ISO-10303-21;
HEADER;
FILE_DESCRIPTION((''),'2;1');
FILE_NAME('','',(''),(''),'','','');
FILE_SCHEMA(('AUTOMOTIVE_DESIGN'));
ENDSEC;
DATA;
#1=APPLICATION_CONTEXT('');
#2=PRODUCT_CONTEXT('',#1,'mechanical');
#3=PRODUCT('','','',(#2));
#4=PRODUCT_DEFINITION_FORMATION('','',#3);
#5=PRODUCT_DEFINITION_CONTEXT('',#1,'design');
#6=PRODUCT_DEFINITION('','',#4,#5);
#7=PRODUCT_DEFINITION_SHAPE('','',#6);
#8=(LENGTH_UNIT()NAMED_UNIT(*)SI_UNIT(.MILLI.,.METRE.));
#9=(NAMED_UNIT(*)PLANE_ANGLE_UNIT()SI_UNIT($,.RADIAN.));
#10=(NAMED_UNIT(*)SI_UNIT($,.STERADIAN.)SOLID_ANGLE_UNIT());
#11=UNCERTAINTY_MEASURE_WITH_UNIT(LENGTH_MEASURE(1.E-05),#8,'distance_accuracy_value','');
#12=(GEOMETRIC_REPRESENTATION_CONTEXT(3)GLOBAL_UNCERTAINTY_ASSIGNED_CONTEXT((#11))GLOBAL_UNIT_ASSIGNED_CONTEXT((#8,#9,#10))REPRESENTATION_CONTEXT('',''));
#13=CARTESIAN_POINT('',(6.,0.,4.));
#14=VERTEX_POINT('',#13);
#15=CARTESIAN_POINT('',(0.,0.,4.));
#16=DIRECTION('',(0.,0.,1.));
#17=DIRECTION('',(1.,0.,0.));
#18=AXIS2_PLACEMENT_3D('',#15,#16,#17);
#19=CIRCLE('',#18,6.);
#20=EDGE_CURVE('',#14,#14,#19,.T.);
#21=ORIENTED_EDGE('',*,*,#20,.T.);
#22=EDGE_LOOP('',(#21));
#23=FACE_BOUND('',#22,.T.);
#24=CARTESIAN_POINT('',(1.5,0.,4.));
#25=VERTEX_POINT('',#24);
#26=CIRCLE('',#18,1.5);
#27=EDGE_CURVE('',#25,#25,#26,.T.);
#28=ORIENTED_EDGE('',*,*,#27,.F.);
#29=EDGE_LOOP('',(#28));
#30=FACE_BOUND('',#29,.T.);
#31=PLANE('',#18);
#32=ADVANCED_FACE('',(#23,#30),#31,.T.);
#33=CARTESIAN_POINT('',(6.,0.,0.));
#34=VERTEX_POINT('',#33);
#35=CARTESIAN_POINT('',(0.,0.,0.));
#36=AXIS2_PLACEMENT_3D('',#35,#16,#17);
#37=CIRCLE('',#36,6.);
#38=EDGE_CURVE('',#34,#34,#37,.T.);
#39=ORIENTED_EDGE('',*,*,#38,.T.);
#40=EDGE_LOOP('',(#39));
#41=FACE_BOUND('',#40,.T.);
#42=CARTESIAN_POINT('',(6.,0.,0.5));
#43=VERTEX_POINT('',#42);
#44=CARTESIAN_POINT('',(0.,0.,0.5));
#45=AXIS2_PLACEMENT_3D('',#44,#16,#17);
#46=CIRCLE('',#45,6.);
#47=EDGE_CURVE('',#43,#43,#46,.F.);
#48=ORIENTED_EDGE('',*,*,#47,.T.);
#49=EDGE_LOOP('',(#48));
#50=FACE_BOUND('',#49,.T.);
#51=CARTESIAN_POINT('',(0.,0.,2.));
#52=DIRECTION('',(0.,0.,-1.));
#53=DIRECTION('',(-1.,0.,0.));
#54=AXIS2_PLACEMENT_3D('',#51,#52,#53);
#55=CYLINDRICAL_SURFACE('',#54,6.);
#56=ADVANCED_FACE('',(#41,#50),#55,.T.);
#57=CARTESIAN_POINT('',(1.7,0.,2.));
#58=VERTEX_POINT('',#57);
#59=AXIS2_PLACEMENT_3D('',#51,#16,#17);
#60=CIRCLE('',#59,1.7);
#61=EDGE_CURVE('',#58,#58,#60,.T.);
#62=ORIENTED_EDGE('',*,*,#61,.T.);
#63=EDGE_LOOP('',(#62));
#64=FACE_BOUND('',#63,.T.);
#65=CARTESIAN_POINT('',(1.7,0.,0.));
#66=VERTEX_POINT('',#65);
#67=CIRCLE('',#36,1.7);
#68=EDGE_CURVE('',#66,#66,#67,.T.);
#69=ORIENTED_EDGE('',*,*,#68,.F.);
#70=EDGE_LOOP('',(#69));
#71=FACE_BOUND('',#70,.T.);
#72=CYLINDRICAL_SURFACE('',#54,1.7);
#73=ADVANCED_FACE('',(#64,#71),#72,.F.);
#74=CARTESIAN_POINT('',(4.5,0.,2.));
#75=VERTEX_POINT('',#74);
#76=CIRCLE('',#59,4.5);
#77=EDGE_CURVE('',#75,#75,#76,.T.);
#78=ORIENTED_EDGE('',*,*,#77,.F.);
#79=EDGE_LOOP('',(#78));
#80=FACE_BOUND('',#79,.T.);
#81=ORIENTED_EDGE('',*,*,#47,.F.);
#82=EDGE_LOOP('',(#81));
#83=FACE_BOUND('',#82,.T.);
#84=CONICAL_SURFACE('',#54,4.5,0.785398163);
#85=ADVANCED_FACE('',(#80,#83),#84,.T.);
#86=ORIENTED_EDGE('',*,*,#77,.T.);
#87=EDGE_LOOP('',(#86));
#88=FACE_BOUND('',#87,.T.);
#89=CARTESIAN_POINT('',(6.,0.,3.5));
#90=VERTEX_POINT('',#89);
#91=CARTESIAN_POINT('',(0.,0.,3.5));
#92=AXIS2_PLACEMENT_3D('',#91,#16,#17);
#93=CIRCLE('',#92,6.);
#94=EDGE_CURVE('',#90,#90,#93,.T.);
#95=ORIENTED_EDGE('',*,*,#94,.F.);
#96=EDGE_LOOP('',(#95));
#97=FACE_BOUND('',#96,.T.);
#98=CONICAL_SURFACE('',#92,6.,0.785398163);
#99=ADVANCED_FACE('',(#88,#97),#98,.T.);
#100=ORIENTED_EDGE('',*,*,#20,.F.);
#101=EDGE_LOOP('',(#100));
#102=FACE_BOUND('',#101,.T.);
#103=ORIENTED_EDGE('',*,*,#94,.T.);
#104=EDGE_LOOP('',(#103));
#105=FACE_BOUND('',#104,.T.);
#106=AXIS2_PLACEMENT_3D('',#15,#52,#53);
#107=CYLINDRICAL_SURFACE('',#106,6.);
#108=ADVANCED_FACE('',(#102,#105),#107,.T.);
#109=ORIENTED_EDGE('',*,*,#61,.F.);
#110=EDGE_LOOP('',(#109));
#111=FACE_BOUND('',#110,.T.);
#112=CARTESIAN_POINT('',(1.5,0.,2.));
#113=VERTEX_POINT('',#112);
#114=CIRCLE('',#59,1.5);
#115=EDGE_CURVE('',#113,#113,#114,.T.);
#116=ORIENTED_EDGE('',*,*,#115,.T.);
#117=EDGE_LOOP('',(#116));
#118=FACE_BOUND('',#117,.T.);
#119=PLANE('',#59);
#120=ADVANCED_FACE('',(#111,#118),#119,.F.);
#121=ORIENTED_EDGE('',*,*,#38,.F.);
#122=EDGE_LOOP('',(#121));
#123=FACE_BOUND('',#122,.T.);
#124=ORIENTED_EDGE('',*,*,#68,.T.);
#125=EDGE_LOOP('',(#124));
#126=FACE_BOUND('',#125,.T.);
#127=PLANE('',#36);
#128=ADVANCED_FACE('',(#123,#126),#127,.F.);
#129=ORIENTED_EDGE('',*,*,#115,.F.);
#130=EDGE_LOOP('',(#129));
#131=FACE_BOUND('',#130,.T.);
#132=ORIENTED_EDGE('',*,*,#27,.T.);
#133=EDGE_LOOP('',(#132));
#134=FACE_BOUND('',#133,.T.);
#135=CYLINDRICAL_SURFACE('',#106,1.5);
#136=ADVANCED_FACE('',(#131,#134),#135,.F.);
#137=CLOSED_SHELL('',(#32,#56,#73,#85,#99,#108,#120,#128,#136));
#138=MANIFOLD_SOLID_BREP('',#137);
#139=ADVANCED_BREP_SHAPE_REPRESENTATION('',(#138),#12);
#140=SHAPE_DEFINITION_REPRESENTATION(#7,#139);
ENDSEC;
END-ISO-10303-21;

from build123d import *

# Parameters (mm, degrees)
SKETCH1_R           = 6
SKETCH1_R_2         = 1.7
BOSS_EXTRUDE1_DEPTH = 2
CHAMFER1_SIZE       = 1.5
SKETCH2_R           = 6
SKETCH2_R_2         = 1.5
BOSS_EXTRUDE2_DEPTH = 2
CHAMFER2_SIZE       = 1.5


with BuildPart() as part:
    # Sketch1 → Boss-Extrude1 (new body)
    with BuildSketch(Plane.XY):
        Circle(SKETCH1_R)
        Circle(SKETCH1_R_2, mode=Mode.SUBTRACT)
    extrude(amount=BOSS_EXTRUDE1_DEPTH)

    # Chamfer1
    chamfer1_edges = [part.edges().sort_by_distance(p)[0] for p in [
        (-6, 0, 2),
    ]]
    chamfer(chamfer1_edges, length=CHAMFER1_SIZE)

    # Sketch2 → Boss-Extrude2 (add)
    with BuildSketch(Plane.XY.offset(2)):
        Circle(SKETCH2_R)
        Circle(SKETCH2_R_2, mode=Mode.SUBTRACT)
    extrude(amount=BOSS_EXTRUDE2_DEPTH)

    # Chamfer2
    chamfer2_edges = [part.edges().sort_by_distance(p)[0] for p in [
        (-6, 0, 2),
    ]]
    chamfer(chamfer2_edges, length=CHAMFER2_SIZE - 0.0001)  # a hair under: the kernel refuses the full size


solid = part.part
